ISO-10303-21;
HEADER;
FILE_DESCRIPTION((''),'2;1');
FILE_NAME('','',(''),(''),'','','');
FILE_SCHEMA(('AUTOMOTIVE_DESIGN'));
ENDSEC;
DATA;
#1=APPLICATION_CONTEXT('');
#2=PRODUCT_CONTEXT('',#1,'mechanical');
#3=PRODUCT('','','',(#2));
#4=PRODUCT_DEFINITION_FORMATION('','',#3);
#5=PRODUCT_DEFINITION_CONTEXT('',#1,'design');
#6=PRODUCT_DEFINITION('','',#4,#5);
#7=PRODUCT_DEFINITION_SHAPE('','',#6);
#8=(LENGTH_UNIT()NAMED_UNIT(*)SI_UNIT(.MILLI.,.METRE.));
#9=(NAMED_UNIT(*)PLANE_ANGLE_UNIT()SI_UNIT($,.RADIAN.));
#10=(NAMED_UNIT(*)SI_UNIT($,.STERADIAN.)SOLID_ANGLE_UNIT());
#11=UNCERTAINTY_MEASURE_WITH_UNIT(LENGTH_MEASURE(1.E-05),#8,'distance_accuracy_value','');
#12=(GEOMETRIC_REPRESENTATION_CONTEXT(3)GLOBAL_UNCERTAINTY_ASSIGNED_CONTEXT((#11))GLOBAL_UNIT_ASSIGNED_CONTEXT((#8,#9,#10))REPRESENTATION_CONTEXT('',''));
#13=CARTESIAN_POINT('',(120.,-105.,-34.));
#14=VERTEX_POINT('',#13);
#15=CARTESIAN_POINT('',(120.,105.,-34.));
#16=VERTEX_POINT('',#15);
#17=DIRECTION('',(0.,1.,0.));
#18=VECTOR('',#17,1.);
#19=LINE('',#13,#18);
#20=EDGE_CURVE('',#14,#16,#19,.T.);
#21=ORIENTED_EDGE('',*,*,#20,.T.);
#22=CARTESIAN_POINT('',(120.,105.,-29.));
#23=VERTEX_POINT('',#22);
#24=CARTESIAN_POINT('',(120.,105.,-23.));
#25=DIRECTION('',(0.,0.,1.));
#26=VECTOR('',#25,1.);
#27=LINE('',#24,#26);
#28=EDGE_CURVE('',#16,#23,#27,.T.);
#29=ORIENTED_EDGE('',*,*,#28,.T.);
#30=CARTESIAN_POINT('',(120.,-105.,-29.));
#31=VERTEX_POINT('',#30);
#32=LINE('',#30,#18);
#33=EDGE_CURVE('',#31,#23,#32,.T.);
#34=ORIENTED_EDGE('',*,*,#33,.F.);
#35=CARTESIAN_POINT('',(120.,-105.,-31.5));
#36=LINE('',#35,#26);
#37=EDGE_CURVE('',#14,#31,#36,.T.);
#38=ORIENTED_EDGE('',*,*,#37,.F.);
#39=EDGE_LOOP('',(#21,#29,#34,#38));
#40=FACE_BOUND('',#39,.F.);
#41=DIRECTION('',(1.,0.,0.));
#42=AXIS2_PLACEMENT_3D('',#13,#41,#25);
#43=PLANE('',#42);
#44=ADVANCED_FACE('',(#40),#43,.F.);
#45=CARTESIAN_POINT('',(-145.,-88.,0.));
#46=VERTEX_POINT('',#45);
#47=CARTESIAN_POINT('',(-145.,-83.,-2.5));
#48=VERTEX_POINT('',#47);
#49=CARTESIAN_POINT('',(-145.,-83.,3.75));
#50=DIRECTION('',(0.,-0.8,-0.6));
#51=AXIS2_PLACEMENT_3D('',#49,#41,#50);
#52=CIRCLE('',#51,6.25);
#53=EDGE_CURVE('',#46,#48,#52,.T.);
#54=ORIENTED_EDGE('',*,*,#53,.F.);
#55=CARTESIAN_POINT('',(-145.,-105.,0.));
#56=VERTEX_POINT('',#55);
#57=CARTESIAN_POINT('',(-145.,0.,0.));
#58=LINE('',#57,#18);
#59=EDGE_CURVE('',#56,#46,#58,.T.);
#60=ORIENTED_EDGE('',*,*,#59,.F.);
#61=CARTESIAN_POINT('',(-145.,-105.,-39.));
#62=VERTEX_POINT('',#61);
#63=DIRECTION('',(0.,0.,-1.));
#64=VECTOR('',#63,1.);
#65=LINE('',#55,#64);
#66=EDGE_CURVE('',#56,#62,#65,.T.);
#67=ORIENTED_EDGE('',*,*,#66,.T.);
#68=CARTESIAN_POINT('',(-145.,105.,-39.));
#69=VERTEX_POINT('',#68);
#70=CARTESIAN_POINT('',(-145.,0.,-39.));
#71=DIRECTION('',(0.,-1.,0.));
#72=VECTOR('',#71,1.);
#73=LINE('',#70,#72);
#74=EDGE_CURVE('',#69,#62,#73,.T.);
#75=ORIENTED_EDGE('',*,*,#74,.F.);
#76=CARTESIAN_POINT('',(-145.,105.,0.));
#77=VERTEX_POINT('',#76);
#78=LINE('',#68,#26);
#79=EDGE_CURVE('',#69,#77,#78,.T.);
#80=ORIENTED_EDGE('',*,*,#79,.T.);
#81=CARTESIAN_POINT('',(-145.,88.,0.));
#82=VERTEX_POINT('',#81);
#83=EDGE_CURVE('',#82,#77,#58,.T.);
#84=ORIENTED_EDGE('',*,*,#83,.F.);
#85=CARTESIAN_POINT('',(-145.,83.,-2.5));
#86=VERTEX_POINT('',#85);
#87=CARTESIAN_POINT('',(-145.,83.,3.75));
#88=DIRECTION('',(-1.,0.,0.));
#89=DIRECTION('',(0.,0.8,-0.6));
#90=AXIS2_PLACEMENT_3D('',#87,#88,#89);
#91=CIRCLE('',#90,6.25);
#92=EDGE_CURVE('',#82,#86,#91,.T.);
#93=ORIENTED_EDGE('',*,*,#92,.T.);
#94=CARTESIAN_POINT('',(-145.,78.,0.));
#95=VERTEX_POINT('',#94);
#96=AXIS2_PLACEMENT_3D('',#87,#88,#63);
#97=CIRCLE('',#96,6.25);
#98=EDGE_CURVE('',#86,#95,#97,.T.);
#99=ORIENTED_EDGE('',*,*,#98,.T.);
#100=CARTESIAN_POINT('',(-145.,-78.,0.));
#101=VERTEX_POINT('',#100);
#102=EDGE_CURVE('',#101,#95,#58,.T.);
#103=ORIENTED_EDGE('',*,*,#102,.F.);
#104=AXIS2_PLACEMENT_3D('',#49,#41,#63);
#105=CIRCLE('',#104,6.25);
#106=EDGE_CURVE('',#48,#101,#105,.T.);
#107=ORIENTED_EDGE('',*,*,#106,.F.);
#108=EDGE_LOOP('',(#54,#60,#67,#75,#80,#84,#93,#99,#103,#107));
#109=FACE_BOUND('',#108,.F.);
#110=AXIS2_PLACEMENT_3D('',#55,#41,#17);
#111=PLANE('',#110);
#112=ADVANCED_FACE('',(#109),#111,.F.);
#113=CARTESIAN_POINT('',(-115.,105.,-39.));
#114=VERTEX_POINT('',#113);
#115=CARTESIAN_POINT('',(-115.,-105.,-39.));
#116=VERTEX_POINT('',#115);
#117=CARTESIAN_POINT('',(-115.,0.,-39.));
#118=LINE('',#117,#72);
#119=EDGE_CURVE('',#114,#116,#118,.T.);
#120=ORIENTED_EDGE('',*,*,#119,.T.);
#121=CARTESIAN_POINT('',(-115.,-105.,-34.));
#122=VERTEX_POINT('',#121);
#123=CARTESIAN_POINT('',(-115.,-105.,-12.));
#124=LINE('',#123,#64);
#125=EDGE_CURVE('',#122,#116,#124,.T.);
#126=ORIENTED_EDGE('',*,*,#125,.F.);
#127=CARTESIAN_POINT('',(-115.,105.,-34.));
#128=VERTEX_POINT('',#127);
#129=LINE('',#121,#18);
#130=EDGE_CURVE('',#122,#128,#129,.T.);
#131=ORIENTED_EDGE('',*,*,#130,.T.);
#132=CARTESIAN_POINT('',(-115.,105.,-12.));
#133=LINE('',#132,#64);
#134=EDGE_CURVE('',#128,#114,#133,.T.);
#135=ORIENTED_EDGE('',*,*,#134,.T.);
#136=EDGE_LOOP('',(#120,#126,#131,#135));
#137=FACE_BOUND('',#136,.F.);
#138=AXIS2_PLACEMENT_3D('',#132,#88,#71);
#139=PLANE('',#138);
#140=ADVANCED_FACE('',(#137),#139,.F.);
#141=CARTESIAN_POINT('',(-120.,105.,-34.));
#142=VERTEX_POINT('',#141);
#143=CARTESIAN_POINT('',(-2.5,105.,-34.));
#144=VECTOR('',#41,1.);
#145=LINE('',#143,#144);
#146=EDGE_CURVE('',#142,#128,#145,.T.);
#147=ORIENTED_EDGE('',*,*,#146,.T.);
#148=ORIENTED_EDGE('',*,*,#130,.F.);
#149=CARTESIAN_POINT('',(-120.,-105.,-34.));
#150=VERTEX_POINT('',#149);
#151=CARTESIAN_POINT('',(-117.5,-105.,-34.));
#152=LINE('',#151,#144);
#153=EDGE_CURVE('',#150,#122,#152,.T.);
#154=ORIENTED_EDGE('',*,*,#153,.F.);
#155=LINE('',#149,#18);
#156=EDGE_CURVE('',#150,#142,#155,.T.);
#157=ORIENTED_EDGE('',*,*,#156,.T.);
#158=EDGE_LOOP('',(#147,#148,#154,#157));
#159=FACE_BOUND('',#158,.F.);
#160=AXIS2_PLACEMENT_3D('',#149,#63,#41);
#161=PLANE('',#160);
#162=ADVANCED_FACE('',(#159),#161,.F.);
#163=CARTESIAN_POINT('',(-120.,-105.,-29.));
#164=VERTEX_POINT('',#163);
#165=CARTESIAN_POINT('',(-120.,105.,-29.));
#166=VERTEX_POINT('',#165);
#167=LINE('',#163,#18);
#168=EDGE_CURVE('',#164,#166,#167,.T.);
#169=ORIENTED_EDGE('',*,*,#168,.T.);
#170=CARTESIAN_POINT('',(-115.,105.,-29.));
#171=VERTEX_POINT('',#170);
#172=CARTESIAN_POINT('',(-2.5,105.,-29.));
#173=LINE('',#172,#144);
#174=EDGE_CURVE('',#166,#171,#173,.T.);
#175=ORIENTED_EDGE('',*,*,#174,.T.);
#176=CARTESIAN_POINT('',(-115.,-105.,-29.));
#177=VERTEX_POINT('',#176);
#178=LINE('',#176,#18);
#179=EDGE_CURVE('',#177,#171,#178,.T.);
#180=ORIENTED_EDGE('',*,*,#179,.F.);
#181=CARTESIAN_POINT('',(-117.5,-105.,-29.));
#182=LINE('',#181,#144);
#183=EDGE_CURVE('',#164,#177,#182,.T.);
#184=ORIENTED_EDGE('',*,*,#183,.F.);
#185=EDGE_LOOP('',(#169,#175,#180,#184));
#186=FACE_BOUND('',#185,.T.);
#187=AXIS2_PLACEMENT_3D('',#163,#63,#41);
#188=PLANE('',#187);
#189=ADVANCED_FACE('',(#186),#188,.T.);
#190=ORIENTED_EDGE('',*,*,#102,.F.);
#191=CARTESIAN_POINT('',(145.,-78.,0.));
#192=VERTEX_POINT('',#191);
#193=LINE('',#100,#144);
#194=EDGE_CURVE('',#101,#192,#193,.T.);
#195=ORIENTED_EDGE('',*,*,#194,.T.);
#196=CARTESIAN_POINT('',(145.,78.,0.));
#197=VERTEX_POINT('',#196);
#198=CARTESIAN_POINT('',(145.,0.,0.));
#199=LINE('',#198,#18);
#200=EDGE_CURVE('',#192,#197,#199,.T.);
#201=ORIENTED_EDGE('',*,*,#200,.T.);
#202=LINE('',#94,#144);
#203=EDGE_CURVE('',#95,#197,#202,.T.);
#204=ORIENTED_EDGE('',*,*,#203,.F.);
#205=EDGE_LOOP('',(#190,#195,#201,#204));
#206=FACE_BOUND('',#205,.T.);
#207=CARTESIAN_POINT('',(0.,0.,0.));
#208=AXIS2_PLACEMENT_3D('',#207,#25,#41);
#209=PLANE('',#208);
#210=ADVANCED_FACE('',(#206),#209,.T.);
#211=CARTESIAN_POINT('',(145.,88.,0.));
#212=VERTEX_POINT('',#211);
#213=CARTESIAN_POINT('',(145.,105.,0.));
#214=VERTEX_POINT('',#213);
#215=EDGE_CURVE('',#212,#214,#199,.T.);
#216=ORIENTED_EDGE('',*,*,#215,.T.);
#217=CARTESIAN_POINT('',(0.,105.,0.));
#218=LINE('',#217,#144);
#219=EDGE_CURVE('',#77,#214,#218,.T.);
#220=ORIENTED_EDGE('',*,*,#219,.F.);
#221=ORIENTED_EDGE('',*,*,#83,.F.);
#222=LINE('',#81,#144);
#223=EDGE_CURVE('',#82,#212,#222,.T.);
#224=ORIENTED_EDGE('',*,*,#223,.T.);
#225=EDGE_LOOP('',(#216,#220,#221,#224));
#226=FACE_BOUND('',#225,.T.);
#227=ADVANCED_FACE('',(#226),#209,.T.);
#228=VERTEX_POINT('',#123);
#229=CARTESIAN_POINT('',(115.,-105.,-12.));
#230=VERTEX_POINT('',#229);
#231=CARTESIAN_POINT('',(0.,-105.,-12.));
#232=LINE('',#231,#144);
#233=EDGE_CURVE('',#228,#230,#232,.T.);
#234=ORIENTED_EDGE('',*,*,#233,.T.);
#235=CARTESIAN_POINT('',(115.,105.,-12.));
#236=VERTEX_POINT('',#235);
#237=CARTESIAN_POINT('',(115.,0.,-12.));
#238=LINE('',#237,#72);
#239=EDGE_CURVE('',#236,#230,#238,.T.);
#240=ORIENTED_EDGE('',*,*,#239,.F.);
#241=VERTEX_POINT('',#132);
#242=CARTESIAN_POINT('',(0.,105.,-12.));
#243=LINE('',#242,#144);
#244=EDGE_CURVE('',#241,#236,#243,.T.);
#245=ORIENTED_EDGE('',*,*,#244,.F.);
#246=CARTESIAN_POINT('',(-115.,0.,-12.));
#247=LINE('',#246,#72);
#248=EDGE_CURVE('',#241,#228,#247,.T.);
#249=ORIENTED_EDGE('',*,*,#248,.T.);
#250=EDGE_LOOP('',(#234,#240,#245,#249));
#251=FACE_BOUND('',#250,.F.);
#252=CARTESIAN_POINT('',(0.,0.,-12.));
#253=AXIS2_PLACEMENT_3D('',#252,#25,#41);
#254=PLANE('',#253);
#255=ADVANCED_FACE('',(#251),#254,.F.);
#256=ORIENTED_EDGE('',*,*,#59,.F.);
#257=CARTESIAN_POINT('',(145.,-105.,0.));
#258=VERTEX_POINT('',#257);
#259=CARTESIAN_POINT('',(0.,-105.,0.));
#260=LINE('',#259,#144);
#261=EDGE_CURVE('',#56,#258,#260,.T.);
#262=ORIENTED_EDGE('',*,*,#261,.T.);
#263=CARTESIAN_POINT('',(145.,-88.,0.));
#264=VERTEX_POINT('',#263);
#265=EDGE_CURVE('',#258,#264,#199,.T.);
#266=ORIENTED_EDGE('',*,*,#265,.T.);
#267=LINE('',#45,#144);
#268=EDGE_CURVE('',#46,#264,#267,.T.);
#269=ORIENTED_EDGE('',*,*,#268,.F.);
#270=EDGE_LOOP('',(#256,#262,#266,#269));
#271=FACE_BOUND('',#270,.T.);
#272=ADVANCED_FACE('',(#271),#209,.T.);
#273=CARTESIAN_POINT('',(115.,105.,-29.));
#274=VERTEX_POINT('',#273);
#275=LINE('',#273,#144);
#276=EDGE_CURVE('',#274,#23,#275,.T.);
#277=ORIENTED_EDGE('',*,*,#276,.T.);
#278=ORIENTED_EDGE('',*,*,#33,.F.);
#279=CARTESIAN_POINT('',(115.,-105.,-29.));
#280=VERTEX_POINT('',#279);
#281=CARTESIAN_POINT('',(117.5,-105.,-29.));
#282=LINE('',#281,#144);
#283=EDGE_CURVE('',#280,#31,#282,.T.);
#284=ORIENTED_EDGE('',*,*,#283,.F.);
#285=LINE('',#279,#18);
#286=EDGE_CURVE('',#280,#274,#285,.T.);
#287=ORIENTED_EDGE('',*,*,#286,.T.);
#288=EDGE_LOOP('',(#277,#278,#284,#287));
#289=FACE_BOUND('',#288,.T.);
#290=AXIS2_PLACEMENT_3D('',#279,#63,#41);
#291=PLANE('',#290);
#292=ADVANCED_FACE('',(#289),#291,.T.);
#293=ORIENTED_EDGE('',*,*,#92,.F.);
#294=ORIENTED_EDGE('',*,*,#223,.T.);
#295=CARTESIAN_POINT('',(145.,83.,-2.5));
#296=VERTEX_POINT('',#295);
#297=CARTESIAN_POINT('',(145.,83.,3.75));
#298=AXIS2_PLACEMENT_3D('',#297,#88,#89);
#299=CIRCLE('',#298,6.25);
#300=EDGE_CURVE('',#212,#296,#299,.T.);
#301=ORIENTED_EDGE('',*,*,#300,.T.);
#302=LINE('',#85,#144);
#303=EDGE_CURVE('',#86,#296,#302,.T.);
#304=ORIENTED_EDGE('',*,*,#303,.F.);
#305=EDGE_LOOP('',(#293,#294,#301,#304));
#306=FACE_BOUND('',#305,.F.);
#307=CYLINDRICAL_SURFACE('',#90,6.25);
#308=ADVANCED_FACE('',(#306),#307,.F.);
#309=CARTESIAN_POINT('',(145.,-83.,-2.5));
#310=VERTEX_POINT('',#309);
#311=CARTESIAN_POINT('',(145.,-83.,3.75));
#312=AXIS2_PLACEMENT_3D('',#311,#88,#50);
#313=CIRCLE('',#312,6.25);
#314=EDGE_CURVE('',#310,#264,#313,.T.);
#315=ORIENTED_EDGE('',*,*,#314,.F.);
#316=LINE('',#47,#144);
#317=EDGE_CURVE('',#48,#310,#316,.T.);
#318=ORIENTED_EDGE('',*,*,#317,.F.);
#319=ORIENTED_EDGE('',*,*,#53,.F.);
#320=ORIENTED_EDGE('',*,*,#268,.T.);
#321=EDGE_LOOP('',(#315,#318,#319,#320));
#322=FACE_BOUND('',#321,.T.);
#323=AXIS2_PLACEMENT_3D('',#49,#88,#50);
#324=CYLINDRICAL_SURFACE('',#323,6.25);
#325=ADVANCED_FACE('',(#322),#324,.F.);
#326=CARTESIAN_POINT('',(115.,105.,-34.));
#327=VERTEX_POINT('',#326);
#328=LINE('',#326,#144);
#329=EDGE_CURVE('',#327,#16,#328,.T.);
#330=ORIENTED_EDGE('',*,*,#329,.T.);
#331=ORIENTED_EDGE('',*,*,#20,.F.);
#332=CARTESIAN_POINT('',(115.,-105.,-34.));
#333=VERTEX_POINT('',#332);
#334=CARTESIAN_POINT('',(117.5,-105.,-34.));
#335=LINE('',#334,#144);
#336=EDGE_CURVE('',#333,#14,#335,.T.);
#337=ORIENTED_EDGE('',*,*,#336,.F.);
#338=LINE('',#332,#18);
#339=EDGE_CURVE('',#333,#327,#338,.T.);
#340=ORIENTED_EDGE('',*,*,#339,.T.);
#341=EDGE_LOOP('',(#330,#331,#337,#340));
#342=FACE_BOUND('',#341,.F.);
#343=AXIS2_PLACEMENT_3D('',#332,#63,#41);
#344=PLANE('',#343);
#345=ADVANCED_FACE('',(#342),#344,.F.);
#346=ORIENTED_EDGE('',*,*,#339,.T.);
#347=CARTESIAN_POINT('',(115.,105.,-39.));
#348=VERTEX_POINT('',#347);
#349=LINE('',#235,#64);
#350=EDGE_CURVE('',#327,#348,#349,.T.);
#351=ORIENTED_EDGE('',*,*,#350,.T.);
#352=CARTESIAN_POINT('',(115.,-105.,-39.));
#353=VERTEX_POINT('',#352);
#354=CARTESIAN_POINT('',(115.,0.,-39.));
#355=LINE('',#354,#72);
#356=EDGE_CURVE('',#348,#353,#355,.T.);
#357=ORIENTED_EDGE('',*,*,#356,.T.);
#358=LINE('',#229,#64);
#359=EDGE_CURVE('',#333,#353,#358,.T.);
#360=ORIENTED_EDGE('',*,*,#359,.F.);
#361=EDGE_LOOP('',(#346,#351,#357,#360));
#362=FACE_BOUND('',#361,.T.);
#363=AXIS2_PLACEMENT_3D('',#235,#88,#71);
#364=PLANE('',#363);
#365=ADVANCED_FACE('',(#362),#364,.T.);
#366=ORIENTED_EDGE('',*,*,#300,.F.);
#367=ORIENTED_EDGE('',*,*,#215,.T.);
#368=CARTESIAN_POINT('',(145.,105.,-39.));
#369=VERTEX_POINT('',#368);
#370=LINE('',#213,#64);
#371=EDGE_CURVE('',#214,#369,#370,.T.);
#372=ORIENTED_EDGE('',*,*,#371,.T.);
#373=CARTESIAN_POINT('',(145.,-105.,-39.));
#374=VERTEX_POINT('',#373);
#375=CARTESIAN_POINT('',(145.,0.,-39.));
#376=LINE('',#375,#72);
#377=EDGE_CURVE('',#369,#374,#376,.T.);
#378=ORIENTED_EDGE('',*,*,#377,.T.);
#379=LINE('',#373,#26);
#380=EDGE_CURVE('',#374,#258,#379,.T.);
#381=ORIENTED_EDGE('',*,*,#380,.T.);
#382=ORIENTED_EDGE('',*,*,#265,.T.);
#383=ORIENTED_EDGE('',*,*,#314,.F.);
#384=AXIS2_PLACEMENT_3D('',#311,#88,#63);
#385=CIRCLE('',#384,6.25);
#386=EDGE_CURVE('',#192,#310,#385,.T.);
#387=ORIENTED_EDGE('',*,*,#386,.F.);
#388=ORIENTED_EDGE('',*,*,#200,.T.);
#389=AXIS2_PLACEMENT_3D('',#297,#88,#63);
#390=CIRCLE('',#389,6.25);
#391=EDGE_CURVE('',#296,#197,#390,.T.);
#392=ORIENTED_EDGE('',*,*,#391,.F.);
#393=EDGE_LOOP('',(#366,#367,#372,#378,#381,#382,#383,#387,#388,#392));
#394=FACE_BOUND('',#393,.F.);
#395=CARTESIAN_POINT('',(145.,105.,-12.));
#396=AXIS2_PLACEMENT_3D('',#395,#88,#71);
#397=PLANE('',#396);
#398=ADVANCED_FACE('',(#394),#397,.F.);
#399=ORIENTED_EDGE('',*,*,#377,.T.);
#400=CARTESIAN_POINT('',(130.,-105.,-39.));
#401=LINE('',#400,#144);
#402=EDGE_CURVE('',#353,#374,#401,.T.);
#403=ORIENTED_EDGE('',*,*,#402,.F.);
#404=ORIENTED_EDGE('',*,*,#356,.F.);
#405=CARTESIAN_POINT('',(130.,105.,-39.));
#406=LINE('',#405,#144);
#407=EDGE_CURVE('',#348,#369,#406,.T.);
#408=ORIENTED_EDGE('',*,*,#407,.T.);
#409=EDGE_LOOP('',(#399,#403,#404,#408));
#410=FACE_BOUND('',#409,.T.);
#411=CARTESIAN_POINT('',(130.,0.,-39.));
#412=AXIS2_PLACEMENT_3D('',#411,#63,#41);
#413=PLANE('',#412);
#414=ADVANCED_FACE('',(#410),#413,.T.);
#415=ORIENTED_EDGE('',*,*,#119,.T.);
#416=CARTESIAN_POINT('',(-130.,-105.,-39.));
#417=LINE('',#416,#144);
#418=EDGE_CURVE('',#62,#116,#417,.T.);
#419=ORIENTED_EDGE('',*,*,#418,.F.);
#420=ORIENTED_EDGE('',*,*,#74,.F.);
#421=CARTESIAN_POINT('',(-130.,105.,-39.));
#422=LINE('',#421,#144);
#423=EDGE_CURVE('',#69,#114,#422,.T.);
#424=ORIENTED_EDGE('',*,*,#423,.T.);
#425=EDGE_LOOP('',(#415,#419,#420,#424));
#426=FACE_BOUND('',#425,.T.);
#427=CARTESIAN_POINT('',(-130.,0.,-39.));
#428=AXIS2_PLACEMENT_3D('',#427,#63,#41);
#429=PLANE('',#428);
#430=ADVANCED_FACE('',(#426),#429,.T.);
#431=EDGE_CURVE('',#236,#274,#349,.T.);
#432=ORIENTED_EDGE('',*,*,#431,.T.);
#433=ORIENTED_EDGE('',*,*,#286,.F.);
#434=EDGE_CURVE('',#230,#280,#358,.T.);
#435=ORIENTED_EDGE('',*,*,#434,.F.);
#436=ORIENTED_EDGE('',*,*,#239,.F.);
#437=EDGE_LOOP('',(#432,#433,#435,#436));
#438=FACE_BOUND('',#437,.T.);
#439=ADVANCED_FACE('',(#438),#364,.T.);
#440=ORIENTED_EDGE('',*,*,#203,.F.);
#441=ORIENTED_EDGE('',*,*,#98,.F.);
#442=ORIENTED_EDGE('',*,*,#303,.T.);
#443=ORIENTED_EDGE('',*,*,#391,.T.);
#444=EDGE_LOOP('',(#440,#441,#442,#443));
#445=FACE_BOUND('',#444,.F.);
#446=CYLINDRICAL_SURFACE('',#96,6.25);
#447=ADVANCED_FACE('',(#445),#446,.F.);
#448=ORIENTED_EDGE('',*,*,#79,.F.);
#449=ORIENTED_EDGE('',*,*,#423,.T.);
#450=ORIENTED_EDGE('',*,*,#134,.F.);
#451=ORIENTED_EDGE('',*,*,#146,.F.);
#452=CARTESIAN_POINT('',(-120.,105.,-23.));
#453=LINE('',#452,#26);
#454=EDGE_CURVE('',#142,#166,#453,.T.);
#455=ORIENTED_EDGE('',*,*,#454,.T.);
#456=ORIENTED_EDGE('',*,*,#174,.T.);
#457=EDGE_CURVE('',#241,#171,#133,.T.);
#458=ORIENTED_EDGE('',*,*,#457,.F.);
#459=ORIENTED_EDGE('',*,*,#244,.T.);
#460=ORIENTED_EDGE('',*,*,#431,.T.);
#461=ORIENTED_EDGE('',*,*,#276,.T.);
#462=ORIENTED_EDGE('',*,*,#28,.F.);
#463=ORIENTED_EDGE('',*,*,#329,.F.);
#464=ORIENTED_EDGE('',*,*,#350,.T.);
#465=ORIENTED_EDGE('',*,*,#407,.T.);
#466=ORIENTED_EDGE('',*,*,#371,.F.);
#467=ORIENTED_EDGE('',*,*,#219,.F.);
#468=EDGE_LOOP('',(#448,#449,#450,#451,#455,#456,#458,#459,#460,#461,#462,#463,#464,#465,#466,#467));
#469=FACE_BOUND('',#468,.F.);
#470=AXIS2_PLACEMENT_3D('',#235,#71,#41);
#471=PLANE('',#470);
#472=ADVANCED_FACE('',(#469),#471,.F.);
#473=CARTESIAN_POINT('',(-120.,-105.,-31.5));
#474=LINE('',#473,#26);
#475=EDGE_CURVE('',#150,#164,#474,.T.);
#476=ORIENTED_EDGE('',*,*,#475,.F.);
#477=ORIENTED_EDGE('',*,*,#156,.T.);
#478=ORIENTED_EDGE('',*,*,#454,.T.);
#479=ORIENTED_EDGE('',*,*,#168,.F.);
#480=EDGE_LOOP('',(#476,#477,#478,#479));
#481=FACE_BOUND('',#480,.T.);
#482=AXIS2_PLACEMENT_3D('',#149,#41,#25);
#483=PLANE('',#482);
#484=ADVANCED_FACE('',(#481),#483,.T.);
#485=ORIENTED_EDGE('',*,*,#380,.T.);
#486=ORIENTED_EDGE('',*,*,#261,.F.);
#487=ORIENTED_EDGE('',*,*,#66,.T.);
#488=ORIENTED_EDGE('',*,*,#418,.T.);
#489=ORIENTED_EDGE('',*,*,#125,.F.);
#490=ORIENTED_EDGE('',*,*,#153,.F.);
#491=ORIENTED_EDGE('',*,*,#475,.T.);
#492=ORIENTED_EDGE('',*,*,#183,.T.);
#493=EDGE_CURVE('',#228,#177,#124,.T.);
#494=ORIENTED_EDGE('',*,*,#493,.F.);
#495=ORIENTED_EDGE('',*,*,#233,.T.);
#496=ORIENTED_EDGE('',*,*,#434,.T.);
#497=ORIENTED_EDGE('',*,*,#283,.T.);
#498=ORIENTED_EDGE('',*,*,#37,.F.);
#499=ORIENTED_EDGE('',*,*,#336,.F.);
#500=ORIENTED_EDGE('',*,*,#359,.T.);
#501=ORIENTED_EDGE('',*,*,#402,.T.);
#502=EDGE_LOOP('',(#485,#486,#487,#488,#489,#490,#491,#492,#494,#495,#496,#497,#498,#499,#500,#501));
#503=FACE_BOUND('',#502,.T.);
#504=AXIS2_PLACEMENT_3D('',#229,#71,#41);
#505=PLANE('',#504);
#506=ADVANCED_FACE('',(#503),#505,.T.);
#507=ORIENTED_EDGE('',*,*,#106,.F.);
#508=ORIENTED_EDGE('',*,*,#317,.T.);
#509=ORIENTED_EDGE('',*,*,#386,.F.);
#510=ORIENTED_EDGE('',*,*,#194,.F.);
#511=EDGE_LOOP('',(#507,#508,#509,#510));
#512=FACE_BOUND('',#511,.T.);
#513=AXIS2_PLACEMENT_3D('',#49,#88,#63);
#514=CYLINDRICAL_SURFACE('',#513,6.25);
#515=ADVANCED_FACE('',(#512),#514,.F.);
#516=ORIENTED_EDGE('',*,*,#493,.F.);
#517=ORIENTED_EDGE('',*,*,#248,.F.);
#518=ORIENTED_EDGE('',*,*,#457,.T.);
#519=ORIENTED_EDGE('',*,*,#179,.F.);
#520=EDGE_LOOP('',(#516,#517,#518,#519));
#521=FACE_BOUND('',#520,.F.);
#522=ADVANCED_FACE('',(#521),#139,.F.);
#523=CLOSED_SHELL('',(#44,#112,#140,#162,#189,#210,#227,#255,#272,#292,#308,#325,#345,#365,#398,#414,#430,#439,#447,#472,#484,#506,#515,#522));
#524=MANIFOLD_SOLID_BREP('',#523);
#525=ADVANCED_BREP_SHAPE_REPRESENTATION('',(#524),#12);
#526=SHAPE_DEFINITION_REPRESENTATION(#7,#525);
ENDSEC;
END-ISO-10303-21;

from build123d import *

# Parameters (mm, degrees)
F0_W     = 290
F0_H     = 210
F1_DEPTH = 12
F2_W     = 30
F2_H     = 210
F3_DEPTH = 27
F4_W     = 5
F4_H     = 5
F5_DEPTH = 210.001
F7_DEPTH = 290.001


# Not quite as in the source:
# - a pattern or mirror of a feature is missing from the dataset's text; its kind, count and spacing are read off the source's solid


with BuildPart() as f1:
    # F0 (on Top) → F1 (new body)
    with BuildSketch(Plane.XY):
        Rectangle(F0_W, F0_H)
    extrude(amount=-F1_DEPTH)

    # F2 (on face) → F3 (join)
    with BuildSketch(Plane(origin=(0, 0, -12), x_dir=(1, 0, 0), z_dir=(0, 0, -1))):
        with Locations((130, 0)):
            Rectangle(F2_W, F2_H)
        with Locations((-130, 0)):
            Rectangle(F2_W, F2_H)
    extrude(amount=F3_DEPTH)

    # F4 (on face) → F5 (cut, through all)
    with BuildSketch(Plane.XZ.offset(105)):
        with Locations((-117.5, -31.5)):
            Rectangle(F4_W, F4_H)
        with Locations((117.5, -31.5)):
            Rectangle(F4_W, F4_H)
    extrude(amount=-F5_DEPTH, mode=Mode.SUBTRACT)

    # F6 (on face) → F7 (cut, through all)
    with BuildSketch(Plane(origin=(-145, 0, 0), x_dir=(0, -1, 0), z_dir=(-1, 0, 0))):
        with BuildLine():
            Line((-78, 0), (-88, 0))
            ThreePointArc((-88, 0), (-85.7950849719, -1.8401699437), (-83, -2.5))
            ThreePointArc((-83, -2.5), (-80.2049150281, -1.8401699437), (-78, 0))
        make_face()
    f7 = extrude(amount=-F7_DEPTH, mode=Mode.SUBTRACT)

    # F7_copies: F7 across plane
    add(f7.mirror(Plane(origin=(0, 0, 0), x_dir=(0, 0, -1), z_dir=(0, -1, 0))), mode=Mode.SUBTRACT)


solid = f1.part
